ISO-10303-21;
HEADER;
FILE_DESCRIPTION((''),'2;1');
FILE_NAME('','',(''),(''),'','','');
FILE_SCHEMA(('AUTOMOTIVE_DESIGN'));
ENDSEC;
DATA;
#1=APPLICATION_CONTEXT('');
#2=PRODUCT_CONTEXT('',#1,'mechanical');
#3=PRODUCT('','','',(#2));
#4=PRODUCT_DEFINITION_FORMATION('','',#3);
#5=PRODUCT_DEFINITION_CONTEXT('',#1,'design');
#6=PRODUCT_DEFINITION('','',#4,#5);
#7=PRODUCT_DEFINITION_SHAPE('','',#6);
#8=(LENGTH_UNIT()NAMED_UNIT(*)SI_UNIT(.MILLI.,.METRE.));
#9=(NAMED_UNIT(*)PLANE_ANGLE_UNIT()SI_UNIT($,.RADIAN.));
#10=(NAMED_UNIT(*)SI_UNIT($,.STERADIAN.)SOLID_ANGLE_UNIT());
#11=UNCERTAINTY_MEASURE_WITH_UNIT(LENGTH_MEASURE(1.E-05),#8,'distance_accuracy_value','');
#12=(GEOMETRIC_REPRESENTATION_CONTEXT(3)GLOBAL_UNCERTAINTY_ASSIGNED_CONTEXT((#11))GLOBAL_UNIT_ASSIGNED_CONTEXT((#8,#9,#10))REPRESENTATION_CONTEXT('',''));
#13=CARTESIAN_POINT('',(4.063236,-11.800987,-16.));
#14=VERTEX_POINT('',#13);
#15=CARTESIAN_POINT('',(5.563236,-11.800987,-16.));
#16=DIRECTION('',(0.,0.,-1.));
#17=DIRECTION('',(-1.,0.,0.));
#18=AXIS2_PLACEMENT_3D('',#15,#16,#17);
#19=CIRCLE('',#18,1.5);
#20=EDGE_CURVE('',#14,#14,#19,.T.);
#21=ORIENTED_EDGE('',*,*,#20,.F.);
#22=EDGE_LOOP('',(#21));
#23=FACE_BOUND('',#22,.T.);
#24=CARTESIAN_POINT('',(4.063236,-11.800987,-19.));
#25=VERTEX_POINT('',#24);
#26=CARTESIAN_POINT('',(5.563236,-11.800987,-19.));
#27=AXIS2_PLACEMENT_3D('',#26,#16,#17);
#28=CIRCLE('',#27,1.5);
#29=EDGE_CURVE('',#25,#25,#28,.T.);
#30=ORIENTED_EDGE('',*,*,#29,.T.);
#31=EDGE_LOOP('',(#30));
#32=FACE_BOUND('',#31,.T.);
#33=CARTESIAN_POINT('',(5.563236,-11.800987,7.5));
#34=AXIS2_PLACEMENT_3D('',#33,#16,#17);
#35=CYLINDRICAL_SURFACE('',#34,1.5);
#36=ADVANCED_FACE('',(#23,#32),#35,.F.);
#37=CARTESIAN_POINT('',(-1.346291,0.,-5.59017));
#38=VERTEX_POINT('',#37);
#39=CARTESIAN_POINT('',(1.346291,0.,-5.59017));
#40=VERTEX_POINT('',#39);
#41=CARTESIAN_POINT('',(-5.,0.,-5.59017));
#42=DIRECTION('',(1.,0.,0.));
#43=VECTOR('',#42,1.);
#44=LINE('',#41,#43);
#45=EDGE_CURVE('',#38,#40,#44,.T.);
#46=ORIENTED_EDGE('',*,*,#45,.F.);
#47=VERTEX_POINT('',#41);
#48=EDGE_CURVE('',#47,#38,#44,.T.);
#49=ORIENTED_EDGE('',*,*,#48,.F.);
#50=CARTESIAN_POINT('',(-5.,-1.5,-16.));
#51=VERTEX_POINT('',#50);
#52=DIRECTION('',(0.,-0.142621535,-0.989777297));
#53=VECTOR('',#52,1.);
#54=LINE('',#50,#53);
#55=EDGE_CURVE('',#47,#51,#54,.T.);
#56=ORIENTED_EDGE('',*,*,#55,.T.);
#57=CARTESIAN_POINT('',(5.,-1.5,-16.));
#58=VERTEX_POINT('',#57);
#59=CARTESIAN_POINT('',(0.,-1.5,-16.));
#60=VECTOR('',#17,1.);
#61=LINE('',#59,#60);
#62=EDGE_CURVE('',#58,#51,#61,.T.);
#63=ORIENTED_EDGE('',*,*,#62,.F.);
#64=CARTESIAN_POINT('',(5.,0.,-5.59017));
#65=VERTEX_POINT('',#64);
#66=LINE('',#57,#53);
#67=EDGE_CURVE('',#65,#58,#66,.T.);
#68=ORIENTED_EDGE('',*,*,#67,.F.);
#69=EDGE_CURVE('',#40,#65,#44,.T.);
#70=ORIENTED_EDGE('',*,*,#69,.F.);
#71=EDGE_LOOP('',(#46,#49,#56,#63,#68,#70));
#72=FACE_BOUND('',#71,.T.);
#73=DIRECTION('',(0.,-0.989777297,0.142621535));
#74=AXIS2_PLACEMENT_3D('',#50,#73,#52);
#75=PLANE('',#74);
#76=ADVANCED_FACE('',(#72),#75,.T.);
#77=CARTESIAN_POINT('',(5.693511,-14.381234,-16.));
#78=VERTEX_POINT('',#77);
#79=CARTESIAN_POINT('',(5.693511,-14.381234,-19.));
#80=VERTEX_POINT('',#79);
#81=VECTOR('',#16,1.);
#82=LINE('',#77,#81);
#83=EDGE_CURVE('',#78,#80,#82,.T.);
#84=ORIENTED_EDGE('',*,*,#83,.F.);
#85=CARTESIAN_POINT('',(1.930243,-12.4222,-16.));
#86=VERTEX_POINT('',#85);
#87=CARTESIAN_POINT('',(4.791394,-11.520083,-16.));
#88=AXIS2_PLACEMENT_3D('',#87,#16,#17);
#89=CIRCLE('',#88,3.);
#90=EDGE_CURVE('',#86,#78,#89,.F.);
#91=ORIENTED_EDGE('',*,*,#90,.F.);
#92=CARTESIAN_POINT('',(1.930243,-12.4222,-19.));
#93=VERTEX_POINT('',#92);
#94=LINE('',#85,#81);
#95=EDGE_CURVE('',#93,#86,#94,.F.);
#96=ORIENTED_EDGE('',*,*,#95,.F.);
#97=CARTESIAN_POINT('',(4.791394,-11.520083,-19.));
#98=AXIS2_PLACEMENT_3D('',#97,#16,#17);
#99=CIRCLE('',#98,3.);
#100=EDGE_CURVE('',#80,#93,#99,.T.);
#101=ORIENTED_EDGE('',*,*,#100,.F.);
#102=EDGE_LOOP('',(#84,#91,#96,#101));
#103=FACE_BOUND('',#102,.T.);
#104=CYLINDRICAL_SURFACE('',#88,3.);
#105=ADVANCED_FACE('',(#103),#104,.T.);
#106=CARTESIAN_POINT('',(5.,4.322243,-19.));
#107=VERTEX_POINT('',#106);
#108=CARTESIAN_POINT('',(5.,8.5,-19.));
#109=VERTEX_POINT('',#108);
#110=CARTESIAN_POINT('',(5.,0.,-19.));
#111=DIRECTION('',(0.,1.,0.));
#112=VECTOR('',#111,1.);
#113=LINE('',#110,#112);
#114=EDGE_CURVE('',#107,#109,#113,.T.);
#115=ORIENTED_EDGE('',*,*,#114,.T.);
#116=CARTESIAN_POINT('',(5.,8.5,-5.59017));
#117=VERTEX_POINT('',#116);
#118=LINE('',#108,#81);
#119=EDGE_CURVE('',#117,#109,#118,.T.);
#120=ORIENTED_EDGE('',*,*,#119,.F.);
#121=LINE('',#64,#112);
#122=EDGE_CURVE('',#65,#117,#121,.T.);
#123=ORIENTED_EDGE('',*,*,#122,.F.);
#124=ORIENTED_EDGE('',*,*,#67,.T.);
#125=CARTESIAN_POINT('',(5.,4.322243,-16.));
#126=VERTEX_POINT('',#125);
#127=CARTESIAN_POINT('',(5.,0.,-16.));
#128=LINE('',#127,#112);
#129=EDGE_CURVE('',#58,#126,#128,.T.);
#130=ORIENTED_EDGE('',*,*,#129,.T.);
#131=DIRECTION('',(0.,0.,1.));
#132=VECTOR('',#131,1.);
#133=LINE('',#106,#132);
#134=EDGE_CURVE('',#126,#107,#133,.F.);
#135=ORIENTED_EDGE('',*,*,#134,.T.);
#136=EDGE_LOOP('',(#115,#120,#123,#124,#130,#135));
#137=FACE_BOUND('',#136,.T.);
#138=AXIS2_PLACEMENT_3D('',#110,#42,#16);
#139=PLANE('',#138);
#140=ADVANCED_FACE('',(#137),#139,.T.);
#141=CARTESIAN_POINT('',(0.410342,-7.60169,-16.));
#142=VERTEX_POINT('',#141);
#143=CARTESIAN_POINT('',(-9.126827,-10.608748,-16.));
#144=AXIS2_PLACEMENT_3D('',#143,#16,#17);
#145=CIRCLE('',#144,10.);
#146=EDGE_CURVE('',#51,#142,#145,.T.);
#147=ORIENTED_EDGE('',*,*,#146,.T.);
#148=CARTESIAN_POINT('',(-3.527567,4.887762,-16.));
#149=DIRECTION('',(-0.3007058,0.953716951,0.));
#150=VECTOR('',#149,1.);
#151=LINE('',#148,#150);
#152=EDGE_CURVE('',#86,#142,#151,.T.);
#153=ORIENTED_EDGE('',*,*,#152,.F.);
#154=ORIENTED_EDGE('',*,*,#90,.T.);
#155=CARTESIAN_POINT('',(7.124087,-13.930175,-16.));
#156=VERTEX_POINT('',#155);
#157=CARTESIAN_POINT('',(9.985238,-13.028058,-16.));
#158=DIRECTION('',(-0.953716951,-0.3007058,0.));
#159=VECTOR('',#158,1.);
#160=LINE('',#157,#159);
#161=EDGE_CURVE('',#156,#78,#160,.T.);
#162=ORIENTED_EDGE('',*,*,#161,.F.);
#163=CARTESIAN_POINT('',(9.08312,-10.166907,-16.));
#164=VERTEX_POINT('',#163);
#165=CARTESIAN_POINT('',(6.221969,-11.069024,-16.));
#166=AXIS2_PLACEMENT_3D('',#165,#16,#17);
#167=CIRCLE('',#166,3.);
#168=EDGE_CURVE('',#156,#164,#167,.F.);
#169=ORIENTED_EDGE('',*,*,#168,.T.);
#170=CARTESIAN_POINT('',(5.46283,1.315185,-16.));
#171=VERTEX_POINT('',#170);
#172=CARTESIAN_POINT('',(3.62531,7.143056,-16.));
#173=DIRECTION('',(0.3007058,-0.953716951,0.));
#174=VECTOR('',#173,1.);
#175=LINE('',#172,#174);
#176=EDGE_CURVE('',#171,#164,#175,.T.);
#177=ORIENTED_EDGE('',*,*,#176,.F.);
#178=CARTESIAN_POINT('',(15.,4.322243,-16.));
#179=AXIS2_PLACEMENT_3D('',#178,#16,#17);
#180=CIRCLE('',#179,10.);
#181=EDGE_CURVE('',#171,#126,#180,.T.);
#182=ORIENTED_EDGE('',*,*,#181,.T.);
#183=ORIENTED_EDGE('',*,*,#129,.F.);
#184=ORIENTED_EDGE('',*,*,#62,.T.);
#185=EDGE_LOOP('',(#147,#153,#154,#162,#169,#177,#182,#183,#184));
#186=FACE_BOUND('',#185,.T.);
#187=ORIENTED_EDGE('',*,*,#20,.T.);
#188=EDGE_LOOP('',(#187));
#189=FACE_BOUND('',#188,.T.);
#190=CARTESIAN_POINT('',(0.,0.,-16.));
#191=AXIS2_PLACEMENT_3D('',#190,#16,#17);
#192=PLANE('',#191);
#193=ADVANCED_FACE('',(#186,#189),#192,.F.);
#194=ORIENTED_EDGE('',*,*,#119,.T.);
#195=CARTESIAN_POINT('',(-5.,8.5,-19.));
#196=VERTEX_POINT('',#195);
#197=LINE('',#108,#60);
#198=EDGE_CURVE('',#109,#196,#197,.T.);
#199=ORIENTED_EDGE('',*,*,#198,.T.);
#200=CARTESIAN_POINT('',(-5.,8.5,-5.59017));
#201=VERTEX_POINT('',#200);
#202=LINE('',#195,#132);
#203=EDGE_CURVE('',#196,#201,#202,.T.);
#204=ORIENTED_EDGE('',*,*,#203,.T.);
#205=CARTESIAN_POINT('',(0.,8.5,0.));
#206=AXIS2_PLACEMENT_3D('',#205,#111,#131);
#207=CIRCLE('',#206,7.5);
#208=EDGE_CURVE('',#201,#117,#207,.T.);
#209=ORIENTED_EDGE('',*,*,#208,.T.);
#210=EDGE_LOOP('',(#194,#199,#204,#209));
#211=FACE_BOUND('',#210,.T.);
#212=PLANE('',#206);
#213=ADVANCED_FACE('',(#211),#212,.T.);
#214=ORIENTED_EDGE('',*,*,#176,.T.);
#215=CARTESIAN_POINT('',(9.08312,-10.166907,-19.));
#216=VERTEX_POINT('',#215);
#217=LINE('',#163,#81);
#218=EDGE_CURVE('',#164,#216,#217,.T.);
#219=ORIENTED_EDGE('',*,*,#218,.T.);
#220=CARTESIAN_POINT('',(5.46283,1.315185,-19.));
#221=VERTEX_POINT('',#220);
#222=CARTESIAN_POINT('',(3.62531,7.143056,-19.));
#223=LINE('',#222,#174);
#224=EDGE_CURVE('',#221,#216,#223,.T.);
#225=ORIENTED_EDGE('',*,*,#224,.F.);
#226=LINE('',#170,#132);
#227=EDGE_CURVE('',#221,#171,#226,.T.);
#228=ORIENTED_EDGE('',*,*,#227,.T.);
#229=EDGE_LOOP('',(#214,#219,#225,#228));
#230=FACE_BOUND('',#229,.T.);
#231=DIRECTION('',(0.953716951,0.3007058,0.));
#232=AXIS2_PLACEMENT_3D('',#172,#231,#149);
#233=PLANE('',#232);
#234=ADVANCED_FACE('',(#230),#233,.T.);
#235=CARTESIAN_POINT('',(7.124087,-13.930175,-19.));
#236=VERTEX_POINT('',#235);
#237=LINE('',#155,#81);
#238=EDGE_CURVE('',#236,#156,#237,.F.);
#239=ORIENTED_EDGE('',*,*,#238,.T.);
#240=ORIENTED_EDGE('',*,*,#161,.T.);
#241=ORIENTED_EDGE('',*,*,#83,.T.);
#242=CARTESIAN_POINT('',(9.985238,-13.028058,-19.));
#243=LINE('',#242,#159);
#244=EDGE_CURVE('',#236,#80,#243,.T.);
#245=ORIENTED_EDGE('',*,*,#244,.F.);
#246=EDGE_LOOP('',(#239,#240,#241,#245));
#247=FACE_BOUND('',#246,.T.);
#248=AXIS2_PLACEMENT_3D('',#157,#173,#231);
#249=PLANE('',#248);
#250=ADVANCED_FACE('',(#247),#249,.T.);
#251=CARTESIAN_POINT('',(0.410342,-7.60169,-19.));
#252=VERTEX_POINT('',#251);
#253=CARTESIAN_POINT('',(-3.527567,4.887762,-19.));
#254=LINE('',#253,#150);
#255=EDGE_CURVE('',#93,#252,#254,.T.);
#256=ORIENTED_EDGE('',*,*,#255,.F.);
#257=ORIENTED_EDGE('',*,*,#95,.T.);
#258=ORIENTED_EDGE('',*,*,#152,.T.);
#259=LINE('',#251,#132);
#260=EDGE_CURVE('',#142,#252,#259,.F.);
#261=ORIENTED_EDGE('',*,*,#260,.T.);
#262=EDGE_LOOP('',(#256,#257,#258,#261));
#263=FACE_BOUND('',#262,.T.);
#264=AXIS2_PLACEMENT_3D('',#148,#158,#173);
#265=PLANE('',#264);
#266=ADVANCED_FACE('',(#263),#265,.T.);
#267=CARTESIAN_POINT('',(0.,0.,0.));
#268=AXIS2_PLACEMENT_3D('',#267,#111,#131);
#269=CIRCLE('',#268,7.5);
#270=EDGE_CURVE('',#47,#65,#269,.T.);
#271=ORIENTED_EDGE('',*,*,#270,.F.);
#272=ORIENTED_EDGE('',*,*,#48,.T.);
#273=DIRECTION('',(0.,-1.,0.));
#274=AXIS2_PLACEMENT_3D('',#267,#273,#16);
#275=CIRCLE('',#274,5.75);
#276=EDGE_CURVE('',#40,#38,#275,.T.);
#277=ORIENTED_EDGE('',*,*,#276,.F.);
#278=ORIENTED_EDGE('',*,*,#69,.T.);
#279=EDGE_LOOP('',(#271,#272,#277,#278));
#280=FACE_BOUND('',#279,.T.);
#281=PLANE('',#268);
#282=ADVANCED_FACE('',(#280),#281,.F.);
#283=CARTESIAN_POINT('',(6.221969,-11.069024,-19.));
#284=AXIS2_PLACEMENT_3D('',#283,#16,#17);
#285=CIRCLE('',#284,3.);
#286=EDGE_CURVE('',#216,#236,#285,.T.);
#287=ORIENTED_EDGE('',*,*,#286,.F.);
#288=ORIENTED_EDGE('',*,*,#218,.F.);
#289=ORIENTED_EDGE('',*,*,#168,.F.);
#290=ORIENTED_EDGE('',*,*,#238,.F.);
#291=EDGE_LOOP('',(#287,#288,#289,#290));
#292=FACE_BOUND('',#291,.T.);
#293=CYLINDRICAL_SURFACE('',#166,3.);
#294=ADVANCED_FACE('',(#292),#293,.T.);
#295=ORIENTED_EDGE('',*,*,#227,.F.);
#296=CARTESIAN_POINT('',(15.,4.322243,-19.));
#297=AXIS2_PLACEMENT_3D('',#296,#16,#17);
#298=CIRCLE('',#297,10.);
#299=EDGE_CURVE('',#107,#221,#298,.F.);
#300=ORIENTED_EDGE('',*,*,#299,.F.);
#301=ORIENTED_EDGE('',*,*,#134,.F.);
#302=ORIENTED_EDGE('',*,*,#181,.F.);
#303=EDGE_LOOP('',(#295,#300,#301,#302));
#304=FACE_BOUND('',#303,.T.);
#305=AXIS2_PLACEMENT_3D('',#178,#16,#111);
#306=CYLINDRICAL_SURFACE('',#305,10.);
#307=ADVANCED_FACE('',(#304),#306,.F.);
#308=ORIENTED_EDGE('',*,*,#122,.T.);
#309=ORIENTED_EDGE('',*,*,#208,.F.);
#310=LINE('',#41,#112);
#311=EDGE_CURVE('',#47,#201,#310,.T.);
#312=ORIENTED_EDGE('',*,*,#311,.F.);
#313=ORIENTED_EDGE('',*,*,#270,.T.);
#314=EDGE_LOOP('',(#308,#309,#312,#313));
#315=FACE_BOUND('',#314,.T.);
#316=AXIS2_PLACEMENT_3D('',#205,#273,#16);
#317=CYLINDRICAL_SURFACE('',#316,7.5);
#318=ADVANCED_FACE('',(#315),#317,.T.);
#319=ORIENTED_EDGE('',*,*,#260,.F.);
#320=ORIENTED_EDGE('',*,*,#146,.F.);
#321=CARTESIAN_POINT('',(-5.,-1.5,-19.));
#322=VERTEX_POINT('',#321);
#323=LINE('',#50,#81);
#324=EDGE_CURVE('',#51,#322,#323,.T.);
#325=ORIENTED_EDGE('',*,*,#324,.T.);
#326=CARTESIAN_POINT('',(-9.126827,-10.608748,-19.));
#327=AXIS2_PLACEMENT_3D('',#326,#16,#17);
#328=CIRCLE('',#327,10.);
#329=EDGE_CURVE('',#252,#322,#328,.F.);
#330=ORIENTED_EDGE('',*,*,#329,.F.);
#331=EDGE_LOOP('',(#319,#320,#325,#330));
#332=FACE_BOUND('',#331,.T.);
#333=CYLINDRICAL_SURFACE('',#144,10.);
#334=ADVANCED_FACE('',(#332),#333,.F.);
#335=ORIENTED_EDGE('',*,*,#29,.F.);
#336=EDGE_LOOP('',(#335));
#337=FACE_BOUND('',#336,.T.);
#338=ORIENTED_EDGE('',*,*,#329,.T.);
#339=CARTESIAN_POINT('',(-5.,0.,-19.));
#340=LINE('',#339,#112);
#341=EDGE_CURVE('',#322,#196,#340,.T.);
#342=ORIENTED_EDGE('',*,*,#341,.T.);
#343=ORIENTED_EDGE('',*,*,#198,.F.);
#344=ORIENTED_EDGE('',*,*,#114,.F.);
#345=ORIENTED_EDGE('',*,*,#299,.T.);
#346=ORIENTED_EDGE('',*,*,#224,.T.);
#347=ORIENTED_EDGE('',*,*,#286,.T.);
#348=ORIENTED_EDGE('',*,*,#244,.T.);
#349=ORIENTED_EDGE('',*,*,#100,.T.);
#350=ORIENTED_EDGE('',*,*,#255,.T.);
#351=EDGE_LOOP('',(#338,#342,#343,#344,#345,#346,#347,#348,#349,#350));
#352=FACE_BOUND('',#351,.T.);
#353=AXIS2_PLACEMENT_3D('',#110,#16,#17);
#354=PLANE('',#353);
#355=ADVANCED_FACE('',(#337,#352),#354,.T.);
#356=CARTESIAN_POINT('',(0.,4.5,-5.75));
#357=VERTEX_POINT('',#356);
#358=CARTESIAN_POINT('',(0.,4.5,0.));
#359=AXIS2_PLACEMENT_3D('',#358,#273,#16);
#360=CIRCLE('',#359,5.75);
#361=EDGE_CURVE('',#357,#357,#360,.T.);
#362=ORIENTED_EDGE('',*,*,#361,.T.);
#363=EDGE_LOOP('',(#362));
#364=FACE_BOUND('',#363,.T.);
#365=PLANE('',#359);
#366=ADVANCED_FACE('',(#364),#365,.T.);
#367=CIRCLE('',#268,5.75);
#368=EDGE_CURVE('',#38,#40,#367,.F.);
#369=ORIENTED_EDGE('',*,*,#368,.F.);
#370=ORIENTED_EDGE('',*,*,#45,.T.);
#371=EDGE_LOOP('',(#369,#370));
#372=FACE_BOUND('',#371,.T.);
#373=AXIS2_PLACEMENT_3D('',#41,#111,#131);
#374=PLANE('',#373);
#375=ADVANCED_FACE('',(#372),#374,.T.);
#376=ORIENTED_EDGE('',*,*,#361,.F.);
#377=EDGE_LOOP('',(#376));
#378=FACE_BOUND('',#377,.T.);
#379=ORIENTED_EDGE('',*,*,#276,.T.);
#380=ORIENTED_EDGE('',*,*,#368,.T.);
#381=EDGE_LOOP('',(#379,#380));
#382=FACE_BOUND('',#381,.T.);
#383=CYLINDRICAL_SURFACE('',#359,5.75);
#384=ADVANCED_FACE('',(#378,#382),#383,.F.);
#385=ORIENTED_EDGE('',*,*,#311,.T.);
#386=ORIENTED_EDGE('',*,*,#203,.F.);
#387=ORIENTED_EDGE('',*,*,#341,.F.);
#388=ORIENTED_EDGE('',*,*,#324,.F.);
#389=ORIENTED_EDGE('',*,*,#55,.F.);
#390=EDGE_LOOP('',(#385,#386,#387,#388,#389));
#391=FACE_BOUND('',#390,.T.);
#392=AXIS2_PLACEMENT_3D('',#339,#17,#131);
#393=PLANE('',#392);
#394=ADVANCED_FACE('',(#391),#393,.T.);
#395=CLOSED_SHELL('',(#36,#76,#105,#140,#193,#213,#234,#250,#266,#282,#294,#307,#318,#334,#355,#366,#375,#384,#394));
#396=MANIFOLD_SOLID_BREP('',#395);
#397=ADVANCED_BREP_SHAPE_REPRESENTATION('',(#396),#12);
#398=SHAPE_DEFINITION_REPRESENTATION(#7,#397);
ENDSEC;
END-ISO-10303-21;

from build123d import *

# Parameters (mm, degrees)
ESBO_O2_R                = 7.5
RESSALTO_EXTRUS_O1_DEPTH = 8.5
ESBO_O3_R                = 5.75
CORTE_EXTRUS_O1_DEPTH    = 4.5
RESSALTO_EXTRUS_O2_START = -8.5
RESSALTO_EXTRUS_O2_DEPTH = 8.5
RESSALTO_EXTRUS_O3_DEPTH = 3
ESBO_O10_R               = 1.5
CORTE_EXTRUS_O2_DEPTH    = 33.179741965
FILETE2_R                = 3
RESSALTO_EXTRUS_O4_DEPTH = 10
FILETE4_R                = 10
FILETE5_R                = 10


with BuildPart() as part:
    # Esboço2 → Ressalto-extrusão1 (new body)
    with BuildSketch(Plane(origin=(0, 0, 0), x_dir=(1, 0, 0), z_dir=(0, 1, 0))):
        with Locations(Location((0, 0, 0), (0, 0, 270))):
            Circle(ESBO_O2_R)
    extrude(amount=RESSALTO_EXTRUS_O1_DEPTH)

    # Esboço3 → Corte-extrusão1 (cut)
    with BuildSketch(Plane.XZ):
        with Locations(Location((0, 0, 0), (0, 0, 270))):
            Circle(ESBO_O3_R)
    extrude(amount=-CORTE_EXTRUS_O1_DEPTH, mode=Mode.SUBTRACT)

    # Esboço4 → Ressalto-extrusão2 (add)
    with BuildSketch(Plane(origin=(0, 8.5, 0), x_dir=(1, 0, 0), z_dir=(0, 1, 0)).offset(RESSALTO_EXTRUS_O2_START)):
        with BuildLine():
            Line((5, 19), (-5, 19))
            Line((-5, 19), (-5, 5.590169944))
            ThreePointArc((-5, 5.590169944), (0, 7.5), (5, 5.590169944))
            Line((5, 5.590169944), (5, 19))
        make_face()
    extrude(amount=RESSALTO_EXTRUS_O2_DEPTH)

    # Esboço9 → Ressalto-extrusão3 (add)
    with BuildSketch(Plane(origin=(0, 0, -19), x_dir=(-1, 0, 0), z_dir=(0, 0, -1))):
        Polygon((-3.625309941, 7.143055834), (-9.985237601, -13.028057675), (-2.83236047, -15.283351171), (3.527567189, 4.887762338), (-0.053729842, 6), align=None)
    extrude(amount=-RESSALTO_EXTRUS_O3_DEPTH)

    # Esboço10 → Corte-extrusão2 (cut, through all)
    with BuildSketch(Plane(origin=(0, 0, -19), x_dir=(-1, 0, 0), z_dir=(0, 0, -1))):
        with Locations((-5.563236349, -11.800986501)):
            Circle(ESBO_O10_R)
    extrude(amount=-CORTE_EXTRUS_O2_DEPTH, mode=Mode.SUBTRACT)

    # Filete2
    filete2_edges = [part.edges().sort_by_distance(p)[0] for p in [
        (2.83236047, -15.283351171, -17.5),
        (9.985237601, -13.028057675, -17.5),
    ]]
    fillet(filete2_edges, radius=FILETE2_R)

    # Esboço12 → Ressalto-extrusão4 (add)
    with BuildSketch(Plane(origin=(5, 0, 0), x_dir=(0, 0, -1), z_dir=(1, 0, 0))):
        Polygon((16, -1.5), (5.590169944, 0), (16, 0), (19, 0), (19, -1.5), align=None)
    extrude(amount=-RESSALTO_EXTRUS_O4_DEPTH)

    # Filete4
    filete4_edges = [part.edges().sort_by_distance(p)[0] for p in [
        (5, 2.783095989, -17.5),
    ]]
    fillet(filete4_edges, radius=FILETE4_R)

    # Filete5
    # the kernel refuses this fillet: 10 mm, written as the material it adds along each edge
    with BuildSketch(Plane(origin=(-1.513513461, -1.5, -16), x_dir=(-1.0, -1.1428670067616555e-12, 0), z_dir=(0, 0, -1))) as filete5_piece_1_section:
        with BuildLine():
            CenterArc((7.613313945, -9.108748299), FILETE5_R, 114.373472149, 48.126527851)
            Line((-1.923855563, -6.101690304), (-2.114598953, -6.041549144))
            Line((-2.114598953, -6.041549144), (-0.19074339, 0.06014116))
            Line((-0.19074339, 0.06014116), (0, 0.2))
            ThreePointArc((0, 0.2), (1.74324327, 0.2), (3.403949991, 0.182174966))
            Line((3.403949991, 0.182174966), (3.486486539, 0))
        make_face()
    filete5_piece_1 = extrude(amount=3, mode=Mode.PRIVATE)
    filete5_piece_1 = split(filete5_piece_1, bisect_by=Plane(origin=(-1.609257645, -1.741830898, -17.678279033), z_dir=(0, -0.9897772969969367, 0.14262153536348515)), keep=Keep.TOP, mode=Mode.PRIVATE)
    add(filete5_piece_1)
    with BuildSketch(Plane(origin=(-1.513513461, -1.5, -16), x_dir=(-1.0, -1.1428670067616555e-12, 0), z_dir=(0, 0, -1))) as filete5_piece_2_section:
        with BuildLine():
            CenterArc((7.613313945, -9.108748299), FILETE5_R, 114.373472149, 48.126527851)
            Line((-1.923855563, -6.101690304), (-2.114598953, -6.041549144))
            Line((-2.114598953, -6.041549144), (-0.19074339, 0.06014116))
            Line((-0.19074339, 0.06014116), (0, 0.2))
            ThreePointArc((0, 0.2), (1.74324327, 0.2), (3.403949991, 0.182174966))
            Line((3.403949991, 0.182174966), (3.486486539, 0))
        make_face()
    filete5_piece_2 = extrude(amount=3, mode=Mode.PRIVATE)
    filete5_piece_2 = split(filete5_piece_2, bisect_by=Plane(origin=(-3.063320239, -1.747230158, -17.715749287), z_dir=(0, 0.9897772969969367, -0.14262153536348515)), keep=Keep.TOP, mode=Mode.PRIVATE)
    add(filete5_piece_2)
    with BuildSketch(Plane(origin=(-1.513513461, -1.5, -0.00550001), x_dir=(-1.0, -1.1395552717741066e-12, 0), z_dir=(0, 0, -1))) as filete5_piece_3_section:
        with BuildLine():
            CenterArc((7.613313945, -9.108748299), FILETE5_R, 114.373472149, 48.126527851)
            Line((-1.923855563, -6.101690304), (-2.114598953, -6.041549144))
            Line((-2.114598953, -6.041549144), (-0.19074339, 0.06014116))
            Line((-0.19074339, 0.06014116), (0, 0.2))
            ThreePointArc((0, 0.2), (1.74324327, 0.2), (3.403949991, 0.182174966))
            Line((3.403949991, 0.182174966), (3.486486539, 0))
        make_face()
    filete5_piece_3 = extrude(amount=18.99449999, mode=Mode.PRIVATE)
    filete5_piece_3 = split(filete5_piece_3, bisect_by=Plane(origin=(-3.132069725, -1.369378897, -16), z_dir=(0, 0, 1)), keep=Keep.TOP, mode=Mode.PRIVATE)
    filete5_piece_3 = split(filete5_piece_3, bisect_by=Plane(origin=(-3.132069725, -1.433360973, -15.537532703), z_dir=(0, 0.9897772969969367, -0.14262153536348515)), keep=Keep.TOP, mode=Mode.PRIVATE)
    add(filete5_piece_3)


solid = part.part
